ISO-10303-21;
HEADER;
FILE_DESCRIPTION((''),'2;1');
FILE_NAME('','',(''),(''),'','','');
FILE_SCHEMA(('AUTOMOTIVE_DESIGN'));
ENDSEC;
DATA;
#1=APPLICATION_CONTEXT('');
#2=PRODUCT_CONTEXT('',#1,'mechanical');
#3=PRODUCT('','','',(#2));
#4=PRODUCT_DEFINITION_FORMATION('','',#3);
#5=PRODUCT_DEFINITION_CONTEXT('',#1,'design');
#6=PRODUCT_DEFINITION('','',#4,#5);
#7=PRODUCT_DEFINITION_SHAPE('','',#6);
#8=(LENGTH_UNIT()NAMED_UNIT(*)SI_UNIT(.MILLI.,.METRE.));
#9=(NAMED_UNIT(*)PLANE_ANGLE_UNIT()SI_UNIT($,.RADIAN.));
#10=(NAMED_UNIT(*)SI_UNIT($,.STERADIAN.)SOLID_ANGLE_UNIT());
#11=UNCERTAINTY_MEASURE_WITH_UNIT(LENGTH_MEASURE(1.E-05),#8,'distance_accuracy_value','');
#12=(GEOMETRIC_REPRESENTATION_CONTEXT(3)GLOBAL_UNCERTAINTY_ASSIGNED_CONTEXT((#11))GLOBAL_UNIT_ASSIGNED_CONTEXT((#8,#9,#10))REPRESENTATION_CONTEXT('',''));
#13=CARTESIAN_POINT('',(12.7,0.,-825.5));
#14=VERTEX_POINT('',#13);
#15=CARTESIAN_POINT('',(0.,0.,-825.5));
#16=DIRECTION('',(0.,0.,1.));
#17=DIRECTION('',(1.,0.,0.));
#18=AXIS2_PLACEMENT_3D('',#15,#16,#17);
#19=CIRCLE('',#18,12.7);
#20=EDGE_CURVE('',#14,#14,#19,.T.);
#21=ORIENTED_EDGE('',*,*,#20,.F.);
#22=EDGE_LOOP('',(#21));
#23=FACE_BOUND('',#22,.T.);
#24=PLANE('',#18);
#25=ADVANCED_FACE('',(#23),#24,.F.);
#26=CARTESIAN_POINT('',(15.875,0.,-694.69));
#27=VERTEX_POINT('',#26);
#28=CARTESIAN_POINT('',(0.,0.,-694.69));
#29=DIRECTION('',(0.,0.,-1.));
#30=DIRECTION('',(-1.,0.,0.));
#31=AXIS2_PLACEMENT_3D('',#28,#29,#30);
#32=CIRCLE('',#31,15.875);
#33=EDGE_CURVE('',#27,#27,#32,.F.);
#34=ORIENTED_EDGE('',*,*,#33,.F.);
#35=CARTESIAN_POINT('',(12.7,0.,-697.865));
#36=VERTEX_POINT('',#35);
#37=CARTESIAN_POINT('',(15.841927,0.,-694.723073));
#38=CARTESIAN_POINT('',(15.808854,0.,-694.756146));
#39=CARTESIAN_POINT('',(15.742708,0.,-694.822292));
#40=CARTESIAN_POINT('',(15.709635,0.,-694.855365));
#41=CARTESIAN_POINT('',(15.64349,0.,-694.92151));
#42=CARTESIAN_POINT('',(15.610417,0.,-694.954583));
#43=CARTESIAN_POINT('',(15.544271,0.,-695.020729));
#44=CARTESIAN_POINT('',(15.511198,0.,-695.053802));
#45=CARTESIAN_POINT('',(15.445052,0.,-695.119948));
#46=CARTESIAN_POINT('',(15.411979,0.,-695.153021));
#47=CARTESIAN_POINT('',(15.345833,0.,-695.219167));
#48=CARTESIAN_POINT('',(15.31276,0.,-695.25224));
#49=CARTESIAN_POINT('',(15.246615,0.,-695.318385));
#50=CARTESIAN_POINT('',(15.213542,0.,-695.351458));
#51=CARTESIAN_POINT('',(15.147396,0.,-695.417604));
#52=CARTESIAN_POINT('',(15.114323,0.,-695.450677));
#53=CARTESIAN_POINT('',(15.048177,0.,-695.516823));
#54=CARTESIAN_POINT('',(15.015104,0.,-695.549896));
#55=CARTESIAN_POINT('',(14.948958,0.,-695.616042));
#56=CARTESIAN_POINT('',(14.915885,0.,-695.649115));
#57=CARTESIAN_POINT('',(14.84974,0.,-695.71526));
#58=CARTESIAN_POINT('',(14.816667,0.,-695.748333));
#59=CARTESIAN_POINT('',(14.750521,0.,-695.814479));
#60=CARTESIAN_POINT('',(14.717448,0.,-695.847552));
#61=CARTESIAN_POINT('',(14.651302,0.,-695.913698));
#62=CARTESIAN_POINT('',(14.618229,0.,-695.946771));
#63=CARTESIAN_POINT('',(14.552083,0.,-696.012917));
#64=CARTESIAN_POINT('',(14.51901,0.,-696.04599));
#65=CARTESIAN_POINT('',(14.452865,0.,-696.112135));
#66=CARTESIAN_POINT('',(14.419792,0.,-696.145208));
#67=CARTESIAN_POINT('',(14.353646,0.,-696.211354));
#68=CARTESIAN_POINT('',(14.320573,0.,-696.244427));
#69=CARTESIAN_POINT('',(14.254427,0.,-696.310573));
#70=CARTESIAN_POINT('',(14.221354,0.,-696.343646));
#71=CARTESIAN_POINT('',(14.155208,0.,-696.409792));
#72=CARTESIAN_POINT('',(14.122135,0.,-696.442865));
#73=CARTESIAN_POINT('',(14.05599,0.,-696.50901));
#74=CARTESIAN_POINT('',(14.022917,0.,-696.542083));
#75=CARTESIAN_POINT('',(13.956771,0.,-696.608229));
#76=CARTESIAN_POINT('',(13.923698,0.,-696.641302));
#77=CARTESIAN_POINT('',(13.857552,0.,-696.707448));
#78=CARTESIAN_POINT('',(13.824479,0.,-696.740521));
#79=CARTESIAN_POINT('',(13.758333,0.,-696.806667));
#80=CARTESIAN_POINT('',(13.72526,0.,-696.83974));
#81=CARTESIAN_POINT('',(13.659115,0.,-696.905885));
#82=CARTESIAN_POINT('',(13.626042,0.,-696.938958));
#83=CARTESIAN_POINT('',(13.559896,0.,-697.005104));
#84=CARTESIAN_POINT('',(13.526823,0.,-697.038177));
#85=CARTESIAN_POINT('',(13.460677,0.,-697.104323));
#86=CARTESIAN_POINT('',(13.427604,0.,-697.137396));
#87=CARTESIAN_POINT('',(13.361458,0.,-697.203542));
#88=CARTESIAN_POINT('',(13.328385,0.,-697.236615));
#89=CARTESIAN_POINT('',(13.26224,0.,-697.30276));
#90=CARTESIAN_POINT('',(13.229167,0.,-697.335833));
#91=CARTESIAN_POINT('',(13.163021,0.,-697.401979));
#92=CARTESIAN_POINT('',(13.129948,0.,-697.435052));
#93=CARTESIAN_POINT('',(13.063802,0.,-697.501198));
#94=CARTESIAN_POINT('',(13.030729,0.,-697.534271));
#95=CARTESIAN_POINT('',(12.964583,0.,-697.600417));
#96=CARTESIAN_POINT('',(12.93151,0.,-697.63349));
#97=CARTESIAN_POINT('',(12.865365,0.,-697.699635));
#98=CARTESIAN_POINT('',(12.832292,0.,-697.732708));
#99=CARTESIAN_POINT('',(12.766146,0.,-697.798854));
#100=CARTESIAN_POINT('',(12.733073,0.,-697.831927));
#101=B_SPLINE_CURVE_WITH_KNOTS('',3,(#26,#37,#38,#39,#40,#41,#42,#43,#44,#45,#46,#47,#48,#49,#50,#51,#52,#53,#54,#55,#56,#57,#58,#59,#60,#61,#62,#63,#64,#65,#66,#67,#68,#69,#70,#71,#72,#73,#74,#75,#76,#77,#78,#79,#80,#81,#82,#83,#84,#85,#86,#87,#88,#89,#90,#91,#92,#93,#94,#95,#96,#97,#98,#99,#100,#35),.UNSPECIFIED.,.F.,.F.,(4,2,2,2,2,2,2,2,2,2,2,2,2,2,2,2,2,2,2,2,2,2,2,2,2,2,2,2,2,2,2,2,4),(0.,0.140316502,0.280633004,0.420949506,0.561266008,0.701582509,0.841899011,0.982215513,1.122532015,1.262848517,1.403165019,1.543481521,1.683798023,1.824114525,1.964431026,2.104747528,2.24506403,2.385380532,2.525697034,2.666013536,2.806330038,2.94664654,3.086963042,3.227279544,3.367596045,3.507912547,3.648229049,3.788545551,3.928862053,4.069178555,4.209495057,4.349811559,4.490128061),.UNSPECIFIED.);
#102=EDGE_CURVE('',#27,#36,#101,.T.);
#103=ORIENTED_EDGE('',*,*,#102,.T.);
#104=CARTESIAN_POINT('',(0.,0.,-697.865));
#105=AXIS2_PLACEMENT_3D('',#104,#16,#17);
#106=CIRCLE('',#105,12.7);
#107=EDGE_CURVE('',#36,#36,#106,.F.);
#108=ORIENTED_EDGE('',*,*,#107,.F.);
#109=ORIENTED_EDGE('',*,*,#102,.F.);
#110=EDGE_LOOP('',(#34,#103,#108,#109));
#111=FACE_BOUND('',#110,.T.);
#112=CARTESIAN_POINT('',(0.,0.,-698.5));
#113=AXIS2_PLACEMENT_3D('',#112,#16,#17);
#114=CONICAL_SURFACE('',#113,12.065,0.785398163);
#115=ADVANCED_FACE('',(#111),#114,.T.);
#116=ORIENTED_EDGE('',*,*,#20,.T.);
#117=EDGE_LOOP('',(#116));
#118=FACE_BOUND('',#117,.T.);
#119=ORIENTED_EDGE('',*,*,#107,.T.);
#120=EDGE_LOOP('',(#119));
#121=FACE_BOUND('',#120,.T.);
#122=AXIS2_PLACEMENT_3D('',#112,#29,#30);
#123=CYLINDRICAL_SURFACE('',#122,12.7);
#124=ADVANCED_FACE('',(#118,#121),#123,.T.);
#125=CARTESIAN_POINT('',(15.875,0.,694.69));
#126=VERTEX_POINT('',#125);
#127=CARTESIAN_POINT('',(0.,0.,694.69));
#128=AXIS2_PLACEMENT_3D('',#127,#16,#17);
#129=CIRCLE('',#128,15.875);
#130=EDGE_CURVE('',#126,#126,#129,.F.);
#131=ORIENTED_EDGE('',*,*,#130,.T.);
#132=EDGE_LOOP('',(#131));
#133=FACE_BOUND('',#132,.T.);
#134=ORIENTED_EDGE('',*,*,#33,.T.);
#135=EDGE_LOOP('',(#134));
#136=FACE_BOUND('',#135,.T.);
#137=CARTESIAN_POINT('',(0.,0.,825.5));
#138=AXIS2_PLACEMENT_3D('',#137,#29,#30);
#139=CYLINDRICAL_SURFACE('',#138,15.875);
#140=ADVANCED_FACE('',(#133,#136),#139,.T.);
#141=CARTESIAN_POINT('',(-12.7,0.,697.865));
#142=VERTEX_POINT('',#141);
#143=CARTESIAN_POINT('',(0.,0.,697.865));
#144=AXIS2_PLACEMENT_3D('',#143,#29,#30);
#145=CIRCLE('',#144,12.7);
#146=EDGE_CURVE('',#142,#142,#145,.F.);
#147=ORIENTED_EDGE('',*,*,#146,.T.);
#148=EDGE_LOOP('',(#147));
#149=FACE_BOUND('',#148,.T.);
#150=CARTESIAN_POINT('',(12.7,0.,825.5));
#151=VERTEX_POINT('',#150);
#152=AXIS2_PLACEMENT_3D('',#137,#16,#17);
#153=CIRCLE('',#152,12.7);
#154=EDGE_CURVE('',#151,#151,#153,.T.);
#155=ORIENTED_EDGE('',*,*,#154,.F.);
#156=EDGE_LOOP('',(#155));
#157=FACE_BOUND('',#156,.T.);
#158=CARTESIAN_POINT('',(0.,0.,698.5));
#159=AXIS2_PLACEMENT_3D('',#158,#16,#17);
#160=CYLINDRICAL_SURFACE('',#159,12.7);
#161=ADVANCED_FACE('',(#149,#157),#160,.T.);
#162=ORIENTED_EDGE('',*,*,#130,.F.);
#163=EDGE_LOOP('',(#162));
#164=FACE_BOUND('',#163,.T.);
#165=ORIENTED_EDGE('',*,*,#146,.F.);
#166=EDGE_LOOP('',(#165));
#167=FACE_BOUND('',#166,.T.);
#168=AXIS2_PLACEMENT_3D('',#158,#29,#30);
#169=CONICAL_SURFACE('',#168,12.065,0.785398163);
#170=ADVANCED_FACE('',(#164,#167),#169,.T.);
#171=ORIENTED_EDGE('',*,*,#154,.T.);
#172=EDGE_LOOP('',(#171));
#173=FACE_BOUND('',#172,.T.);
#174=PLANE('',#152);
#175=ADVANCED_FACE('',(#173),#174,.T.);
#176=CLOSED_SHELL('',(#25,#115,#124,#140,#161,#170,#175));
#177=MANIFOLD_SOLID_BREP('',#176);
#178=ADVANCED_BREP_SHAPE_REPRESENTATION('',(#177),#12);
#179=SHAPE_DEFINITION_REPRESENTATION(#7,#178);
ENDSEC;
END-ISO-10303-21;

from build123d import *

# Parameters (mm, degrees)
SKETCH1_R           = 15.875
BOSS_EXTRUDE1_DEPTH = 825.5
SKETCH2_R           = 22.711063055
SKETCH2_R_2         = 12.7
CUT_EXTRUDE1_DEPTH  = 127
CHAMFER1_SIZE       = 3.81


with BuildPart() as part:
    # Sketch1 → Boss-Extrude1 (new, symmetric)
    with BuildSketch(Plane.XY):
        Circle(SKETCH1_R)
    extrude(amount=BOSS_EXTRUDE1_DEPTH, both=True)

    # Sketch2 → Cut-Extrude1 (cut)
    with BuildSketch(Plane.XY.offset(825.5)):
        Circle(SKETCH2_R)
        Circle(SKETCH2_R_2, mode=Mode.SUBTRACT)
    cut_extrude1 = extrude(amount=-CUT_EXTRUDE1_DEPTH, mode=Mode.SUBTRACT)

    # Mirror1: Cut-Extrude1 across plane
    add(cut_extrude1.mirror(Plane.XY), mode=Mode.SUBTRACT)

    # Chamfer1
    # the kernel refuses this chamfer: 3.81 mm, written as the material it takes off along each edge
    with BuildSketch(Plane(origin=(0, 0, -698.5), x_dir=(1, 0, 0), z_dir=(0, -1, 0))) as chamfer1_piece_1_section:
        Polygon((15.875, CHAMFER1_SIZE), (15.875 - CHAMFER1_SIZE, 0), (15.875, 0), align=None)
    chamfer1_piece_1 = revolve(axis=Axis((0, 0, -698.5), (0, 0, 1)), mode=Mode.PRIVATE)
    chamfer1_piece_1 = chamfer1_piece_1 - Plane(origin=(0, 0, -696.286679129), x_dir=(1, 0, 0), z_dir=(0, 0, -1)) * Cylinder(12.7, 64, mode=Mode.PRIVATE)
    add(chamfer1_piece_1, mode=Mode.SUBTRACT)
    with BuildSketch(Plane(origin=(0, 0, 698.5), x_dir=(1, 0, 0), z_dir=(0, -1, 0))) as chamfer1_piece_2_section:
        Polygon((15.875, -CHAMFER1_SIZE), (15.875 - CHAMFER1_SIZE, 0), (15.875, 0), align=None)
    chamfer1_piece_2 = revolve(axis=Axis((0, 0, 698.5), (0, 0, 1)), mode=Mode.PRIVATE)
    chamfer1_piece_2 = chamfer1_piece_2 - Plane(origin=(0, 0, 696.286679129), x_dir=(1, 0, 0), z_dir=(0, 0, 1)) * Cylinder(12.7, 64, mode=Mode.PRIVATE)
    add(chamfer1_piece_2, mode=Mode.SUBTRACT)


solid = part.part
